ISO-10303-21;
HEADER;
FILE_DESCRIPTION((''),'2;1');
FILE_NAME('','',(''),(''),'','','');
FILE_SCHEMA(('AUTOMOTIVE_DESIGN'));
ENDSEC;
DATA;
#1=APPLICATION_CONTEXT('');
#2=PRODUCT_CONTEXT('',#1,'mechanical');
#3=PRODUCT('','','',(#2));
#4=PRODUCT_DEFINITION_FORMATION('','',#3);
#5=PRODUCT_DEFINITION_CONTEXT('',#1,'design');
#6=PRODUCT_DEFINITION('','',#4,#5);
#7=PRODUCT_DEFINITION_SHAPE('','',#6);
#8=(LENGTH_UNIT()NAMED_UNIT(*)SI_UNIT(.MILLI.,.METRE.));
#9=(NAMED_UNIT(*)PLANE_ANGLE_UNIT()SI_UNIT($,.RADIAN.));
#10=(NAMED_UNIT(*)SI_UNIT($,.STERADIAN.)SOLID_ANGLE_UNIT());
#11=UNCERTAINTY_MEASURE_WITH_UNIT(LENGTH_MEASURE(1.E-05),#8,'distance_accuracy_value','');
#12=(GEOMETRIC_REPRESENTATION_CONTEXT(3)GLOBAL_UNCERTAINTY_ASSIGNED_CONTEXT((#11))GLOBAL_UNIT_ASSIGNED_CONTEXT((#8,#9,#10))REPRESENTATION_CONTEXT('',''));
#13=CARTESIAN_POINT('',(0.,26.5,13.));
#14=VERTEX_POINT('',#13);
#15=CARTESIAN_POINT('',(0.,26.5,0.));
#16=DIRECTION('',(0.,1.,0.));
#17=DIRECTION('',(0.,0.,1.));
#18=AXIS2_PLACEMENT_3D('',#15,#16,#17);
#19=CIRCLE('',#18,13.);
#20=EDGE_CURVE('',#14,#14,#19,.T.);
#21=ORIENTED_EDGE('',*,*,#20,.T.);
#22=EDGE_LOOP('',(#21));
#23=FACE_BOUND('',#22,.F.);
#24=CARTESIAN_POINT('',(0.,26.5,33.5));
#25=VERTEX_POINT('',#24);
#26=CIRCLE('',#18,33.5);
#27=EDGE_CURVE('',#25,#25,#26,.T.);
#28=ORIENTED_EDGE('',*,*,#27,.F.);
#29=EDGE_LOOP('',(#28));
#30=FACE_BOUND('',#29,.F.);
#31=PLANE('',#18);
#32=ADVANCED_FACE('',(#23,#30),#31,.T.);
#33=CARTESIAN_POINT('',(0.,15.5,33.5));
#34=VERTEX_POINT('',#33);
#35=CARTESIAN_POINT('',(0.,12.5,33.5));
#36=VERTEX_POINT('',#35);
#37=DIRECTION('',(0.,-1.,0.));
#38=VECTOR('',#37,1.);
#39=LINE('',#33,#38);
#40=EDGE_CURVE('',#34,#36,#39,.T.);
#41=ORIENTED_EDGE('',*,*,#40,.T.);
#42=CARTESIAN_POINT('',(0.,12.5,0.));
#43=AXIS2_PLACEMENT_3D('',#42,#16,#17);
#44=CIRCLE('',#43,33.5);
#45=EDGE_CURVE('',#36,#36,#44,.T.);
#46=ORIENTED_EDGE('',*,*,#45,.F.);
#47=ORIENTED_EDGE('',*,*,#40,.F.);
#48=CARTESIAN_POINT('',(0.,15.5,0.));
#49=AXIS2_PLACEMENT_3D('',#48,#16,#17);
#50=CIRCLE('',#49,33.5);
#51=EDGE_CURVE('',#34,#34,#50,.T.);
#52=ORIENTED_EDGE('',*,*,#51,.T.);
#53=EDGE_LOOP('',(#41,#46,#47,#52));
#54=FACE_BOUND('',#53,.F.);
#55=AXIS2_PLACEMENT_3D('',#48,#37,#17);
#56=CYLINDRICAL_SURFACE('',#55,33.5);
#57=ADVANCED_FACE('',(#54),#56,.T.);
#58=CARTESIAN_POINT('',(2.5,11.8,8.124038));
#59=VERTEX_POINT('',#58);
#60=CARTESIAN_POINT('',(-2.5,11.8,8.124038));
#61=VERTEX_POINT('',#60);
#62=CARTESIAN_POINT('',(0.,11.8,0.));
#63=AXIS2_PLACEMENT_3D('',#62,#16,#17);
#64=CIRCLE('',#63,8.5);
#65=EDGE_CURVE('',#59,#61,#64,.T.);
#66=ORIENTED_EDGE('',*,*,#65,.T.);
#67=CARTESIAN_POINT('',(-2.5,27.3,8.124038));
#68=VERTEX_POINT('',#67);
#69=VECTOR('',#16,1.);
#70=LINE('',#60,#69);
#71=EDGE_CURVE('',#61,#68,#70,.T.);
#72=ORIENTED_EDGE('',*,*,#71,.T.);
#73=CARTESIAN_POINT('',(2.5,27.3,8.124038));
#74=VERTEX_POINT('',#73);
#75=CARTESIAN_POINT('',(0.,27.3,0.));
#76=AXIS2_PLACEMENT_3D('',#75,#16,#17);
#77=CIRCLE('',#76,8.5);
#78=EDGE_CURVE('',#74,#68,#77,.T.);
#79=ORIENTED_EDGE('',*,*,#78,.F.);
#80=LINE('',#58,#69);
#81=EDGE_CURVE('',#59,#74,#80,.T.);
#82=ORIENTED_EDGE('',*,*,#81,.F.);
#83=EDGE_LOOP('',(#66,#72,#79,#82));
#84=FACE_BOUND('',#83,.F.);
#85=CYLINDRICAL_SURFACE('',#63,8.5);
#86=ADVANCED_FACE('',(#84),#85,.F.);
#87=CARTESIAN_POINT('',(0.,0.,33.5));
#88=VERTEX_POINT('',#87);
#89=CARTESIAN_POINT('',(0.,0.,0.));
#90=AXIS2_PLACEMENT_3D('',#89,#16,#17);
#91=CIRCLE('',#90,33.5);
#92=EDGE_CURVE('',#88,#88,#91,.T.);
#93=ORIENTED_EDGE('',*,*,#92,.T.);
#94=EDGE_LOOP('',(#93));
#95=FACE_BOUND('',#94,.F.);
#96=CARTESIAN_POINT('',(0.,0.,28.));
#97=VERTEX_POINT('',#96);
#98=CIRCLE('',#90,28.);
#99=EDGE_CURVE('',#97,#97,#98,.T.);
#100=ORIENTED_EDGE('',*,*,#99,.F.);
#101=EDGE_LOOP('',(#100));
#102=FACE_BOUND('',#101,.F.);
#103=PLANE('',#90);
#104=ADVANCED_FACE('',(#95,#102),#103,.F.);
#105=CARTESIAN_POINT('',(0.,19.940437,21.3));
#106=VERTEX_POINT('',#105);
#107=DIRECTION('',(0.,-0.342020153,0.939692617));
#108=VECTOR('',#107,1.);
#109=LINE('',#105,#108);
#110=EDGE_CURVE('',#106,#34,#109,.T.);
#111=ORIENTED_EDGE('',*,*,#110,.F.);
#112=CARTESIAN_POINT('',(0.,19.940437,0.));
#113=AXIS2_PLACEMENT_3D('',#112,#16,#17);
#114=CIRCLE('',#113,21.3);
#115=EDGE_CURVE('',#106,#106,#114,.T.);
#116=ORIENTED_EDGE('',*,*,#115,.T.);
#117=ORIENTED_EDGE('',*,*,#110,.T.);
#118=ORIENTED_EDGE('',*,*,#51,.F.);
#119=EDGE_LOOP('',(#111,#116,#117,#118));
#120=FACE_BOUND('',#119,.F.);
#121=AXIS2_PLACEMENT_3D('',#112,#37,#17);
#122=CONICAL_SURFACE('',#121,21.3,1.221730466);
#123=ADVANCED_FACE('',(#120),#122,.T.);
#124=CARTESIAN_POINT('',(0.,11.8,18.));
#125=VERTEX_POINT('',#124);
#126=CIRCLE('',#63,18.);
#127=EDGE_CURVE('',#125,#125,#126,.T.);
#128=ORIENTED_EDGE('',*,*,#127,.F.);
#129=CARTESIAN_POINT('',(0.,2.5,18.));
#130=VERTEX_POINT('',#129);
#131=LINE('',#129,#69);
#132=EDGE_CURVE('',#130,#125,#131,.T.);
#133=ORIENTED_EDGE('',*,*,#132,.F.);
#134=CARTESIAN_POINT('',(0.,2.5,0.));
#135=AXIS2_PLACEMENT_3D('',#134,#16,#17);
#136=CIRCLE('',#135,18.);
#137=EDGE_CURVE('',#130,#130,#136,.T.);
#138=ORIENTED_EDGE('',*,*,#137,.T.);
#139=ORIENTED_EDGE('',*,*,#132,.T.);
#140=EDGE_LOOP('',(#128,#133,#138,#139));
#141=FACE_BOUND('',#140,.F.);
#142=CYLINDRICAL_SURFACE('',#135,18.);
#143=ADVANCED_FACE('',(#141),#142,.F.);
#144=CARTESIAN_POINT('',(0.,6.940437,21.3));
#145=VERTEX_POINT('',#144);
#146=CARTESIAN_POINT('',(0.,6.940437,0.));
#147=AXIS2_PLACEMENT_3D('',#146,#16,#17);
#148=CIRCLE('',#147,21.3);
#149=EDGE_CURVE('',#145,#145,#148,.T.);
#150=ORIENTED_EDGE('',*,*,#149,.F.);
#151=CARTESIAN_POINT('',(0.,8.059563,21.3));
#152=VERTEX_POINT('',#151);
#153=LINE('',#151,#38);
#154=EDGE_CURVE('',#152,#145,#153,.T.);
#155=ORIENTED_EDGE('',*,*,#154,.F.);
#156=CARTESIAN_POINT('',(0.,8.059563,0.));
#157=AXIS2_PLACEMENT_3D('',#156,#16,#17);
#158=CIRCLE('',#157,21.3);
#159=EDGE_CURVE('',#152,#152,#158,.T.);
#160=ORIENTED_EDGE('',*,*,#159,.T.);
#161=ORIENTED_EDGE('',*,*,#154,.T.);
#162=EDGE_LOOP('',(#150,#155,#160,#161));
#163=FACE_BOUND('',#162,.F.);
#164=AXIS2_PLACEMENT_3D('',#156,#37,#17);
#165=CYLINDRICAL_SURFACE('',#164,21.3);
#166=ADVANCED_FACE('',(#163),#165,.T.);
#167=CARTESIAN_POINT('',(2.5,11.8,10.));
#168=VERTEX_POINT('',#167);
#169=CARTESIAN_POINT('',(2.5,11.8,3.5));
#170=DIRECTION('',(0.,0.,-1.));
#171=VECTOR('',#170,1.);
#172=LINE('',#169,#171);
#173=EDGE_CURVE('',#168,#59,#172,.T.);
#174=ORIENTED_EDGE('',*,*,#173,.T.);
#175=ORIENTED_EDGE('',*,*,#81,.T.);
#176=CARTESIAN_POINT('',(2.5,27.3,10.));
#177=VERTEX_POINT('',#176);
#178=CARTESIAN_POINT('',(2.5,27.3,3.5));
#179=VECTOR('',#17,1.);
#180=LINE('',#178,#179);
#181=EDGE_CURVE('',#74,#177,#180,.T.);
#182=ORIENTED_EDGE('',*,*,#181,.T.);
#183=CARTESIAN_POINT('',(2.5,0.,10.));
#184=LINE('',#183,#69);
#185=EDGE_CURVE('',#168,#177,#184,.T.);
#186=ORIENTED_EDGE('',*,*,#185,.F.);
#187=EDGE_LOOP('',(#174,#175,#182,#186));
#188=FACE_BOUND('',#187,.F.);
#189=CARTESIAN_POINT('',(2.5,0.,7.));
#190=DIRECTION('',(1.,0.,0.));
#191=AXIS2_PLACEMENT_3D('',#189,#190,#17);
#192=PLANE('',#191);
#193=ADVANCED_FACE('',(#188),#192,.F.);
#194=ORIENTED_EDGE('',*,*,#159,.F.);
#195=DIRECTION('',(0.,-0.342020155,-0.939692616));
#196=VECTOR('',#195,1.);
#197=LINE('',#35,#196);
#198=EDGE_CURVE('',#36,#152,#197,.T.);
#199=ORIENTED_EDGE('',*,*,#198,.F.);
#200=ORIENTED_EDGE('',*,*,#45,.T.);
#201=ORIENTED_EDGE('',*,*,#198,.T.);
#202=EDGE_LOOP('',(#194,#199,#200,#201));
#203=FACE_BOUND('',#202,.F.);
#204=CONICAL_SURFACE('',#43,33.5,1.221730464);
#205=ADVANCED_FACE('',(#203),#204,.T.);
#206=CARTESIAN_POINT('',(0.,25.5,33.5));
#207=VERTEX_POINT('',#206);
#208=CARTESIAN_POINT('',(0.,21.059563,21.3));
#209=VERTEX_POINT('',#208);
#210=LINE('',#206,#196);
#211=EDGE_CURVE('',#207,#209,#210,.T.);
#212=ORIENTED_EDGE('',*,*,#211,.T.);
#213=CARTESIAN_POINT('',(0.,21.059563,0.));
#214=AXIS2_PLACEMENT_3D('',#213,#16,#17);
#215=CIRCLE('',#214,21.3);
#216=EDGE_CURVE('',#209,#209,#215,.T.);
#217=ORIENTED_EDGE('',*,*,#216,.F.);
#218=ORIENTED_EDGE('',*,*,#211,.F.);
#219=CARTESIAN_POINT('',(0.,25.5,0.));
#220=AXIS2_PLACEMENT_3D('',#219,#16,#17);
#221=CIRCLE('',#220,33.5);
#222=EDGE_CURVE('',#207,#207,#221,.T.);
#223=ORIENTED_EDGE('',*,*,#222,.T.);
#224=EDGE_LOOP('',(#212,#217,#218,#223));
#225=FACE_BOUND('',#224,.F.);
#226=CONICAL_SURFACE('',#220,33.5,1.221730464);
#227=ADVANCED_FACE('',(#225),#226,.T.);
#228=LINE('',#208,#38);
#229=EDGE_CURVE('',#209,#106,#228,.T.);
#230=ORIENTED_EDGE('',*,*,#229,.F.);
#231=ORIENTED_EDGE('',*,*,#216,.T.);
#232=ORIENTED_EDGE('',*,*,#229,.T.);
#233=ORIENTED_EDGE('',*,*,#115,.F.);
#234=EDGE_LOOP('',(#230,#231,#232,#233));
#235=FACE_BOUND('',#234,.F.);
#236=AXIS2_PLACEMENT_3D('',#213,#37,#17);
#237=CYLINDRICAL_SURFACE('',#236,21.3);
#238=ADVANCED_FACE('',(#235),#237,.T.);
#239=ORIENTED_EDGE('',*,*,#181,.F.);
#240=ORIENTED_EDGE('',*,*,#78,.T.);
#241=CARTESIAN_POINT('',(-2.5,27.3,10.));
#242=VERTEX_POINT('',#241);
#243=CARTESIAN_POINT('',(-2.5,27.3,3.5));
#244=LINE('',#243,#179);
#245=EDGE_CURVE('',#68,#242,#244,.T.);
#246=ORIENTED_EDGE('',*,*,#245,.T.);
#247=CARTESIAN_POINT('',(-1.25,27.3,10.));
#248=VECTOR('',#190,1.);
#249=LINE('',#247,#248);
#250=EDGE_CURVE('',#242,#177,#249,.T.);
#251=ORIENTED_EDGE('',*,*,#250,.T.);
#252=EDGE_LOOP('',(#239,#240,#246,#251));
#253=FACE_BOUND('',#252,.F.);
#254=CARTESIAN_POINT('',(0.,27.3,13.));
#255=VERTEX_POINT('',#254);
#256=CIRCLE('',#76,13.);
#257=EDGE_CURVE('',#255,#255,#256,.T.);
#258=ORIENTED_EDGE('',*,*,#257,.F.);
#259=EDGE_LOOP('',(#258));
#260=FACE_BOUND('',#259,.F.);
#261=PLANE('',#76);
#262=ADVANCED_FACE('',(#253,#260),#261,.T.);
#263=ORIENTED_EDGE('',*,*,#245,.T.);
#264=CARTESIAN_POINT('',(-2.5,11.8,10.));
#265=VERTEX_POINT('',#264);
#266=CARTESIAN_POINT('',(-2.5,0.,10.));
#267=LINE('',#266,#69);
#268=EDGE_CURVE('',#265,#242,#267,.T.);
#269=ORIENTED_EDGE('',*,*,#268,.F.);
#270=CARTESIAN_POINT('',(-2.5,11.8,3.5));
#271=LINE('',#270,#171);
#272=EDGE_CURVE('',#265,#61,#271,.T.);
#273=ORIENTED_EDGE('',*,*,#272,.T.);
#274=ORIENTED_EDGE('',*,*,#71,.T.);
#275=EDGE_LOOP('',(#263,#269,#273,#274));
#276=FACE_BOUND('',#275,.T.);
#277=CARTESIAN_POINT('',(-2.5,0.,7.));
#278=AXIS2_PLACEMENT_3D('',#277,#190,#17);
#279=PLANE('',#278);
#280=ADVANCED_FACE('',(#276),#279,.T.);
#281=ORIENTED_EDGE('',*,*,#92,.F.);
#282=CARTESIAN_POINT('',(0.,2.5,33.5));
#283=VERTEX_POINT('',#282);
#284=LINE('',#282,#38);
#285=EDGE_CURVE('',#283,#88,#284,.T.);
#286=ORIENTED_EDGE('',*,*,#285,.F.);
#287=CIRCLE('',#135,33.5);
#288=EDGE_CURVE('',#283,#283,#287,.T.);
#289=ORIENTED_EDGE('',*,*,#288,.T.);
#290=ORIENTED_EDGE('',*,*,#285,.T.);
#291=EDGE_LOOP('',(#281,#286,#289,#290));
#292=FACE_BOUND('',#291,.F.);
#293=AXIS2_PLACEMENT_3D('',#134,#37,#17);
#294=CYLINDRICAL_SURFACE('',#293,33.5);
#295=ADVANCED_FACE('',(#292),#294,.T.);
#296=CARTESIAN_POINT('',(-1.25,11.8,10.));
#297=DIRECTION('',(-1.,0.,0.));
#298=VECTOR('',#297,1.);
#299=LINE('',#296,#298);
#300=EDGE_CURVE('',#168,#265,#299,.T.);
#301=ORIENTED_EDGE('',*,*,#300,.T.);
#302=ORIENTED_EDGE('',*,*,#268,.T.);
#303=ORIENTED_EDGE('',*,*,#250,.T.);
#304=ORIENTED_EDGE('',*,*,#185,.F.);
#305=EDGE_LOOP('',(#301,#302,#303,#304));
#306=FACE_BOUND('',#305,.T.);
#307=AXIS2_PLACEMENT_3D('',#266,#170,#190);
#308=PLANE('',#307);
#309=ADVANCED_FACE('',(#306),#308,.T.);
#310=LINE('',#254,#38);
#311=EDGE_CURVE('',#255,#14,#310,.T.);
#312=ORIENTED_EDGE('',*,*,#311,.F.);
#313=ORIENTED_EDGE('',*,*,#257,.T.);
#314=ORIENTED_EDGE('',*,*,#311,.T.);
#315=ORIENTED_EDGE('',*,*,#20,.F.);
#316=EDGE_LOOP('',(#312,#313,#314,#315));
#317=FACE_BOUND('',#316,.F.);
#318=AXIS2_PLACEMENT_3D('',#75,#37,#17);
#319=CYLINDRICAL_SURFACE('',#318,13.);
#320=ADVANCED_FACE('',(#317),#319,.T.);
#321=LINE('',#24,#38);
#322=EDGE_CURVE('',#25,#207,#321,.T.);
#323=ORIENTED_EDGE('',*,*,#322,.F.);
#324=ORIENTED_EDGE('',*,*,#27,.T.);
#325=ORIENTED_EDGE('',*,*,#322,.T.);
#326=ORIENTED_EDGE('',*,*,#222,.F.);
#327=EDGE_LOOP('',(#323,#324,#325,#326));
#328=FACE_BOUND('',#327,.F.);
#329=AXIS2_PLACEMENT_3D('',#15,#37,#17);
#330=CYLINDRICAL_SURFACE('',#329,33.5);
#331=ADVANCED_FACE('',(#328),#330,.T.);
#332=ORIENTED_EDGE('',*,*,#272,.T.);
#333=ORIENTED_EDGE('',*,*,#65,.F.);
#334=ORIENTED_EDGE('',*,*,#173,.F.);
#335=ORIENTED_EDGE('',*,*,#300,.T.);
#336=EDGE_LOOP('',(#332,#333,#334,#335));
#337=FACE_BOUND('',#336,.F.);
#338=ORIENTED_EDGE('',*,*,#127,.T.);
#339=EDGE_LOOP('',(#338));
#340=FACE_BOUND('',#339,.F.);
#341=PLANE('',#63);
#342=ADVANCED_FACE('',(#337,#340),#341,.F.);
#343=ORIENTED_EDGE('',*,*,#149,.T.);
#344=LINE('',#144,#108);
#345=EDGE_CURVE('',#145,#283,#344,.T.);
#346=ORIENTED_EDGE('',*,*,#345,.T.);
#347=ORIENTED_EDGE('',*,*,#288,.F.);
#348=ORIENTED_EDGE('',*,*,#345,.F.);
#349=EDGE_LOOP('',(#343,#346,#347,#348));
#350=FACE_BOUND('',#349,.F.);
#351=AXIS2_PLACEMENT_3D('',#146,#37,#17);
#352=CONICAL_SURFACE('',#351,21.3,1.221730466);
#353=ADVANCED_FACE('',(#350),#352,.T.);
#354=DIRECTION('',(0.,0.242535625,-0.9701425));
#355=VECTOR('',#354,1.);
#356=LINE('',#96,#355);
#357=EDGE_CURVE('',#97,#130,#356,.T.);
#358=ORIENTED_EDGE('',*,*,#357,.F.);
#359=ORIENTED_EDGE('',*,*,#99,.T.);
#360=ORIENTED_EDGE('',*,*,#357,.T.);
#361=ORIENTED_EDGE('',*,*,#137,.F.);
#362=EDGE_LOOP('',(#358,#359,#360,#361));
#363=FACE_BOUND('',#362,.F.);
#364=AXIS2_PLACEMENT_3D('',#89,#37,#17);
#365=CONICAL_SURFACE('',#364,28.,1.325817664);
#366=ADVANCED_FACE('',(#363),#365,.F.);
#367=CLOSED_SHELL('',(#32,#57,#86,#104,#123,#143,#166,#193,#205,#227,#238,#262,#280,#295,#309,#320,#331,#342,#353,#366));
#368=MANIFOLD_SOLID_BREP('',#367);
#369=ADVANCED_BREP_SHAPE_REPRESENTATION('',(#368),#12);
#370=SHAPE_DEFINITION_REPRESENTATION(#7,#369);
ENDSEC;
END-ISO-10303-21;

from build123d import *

# Parameters (mm, degrees)
F2_W     = 5
F2_H     = 3
F3_DEPTH = 27.301


# Not quite as in the source:
# - ends of sketch curves that miss each other by under 0.0002 mm in the source are joined


with BuildPart() as f1:
    # F0 (on Right) → F1 (revolve)
    with BuildSketch(Plane.YZ):
        Polygon((2.5, 33.5), (0, 33.5), (0, 28), (2.5, 18), (11.8, 18), (11.8, 8.5), (27.3, 8.5), (27.3, 13), (26.5, 13), (26.5, 33.5), (25.5, 33.5), (21.0595629684, 21.3), (19.940437, 21.3), (15.5, 33.5), (12.5, 33.5), (8.0595629684, 21.3), (6.940437, 21.3), align=None)
    revolve(axis=Axis((0, 13.65, 0), (0, 1, 0)))

    # F2 (on Front) → F3 (cut, through all)
    with BuildSketch(Plane.XZ):
        with Locations((0, 8.5)):
            Rectangle(F2_W, F2_H)
    extrude(amount=-F3_DEPTH, mode=Mode.SUBTRACT)


solid = f1.part
